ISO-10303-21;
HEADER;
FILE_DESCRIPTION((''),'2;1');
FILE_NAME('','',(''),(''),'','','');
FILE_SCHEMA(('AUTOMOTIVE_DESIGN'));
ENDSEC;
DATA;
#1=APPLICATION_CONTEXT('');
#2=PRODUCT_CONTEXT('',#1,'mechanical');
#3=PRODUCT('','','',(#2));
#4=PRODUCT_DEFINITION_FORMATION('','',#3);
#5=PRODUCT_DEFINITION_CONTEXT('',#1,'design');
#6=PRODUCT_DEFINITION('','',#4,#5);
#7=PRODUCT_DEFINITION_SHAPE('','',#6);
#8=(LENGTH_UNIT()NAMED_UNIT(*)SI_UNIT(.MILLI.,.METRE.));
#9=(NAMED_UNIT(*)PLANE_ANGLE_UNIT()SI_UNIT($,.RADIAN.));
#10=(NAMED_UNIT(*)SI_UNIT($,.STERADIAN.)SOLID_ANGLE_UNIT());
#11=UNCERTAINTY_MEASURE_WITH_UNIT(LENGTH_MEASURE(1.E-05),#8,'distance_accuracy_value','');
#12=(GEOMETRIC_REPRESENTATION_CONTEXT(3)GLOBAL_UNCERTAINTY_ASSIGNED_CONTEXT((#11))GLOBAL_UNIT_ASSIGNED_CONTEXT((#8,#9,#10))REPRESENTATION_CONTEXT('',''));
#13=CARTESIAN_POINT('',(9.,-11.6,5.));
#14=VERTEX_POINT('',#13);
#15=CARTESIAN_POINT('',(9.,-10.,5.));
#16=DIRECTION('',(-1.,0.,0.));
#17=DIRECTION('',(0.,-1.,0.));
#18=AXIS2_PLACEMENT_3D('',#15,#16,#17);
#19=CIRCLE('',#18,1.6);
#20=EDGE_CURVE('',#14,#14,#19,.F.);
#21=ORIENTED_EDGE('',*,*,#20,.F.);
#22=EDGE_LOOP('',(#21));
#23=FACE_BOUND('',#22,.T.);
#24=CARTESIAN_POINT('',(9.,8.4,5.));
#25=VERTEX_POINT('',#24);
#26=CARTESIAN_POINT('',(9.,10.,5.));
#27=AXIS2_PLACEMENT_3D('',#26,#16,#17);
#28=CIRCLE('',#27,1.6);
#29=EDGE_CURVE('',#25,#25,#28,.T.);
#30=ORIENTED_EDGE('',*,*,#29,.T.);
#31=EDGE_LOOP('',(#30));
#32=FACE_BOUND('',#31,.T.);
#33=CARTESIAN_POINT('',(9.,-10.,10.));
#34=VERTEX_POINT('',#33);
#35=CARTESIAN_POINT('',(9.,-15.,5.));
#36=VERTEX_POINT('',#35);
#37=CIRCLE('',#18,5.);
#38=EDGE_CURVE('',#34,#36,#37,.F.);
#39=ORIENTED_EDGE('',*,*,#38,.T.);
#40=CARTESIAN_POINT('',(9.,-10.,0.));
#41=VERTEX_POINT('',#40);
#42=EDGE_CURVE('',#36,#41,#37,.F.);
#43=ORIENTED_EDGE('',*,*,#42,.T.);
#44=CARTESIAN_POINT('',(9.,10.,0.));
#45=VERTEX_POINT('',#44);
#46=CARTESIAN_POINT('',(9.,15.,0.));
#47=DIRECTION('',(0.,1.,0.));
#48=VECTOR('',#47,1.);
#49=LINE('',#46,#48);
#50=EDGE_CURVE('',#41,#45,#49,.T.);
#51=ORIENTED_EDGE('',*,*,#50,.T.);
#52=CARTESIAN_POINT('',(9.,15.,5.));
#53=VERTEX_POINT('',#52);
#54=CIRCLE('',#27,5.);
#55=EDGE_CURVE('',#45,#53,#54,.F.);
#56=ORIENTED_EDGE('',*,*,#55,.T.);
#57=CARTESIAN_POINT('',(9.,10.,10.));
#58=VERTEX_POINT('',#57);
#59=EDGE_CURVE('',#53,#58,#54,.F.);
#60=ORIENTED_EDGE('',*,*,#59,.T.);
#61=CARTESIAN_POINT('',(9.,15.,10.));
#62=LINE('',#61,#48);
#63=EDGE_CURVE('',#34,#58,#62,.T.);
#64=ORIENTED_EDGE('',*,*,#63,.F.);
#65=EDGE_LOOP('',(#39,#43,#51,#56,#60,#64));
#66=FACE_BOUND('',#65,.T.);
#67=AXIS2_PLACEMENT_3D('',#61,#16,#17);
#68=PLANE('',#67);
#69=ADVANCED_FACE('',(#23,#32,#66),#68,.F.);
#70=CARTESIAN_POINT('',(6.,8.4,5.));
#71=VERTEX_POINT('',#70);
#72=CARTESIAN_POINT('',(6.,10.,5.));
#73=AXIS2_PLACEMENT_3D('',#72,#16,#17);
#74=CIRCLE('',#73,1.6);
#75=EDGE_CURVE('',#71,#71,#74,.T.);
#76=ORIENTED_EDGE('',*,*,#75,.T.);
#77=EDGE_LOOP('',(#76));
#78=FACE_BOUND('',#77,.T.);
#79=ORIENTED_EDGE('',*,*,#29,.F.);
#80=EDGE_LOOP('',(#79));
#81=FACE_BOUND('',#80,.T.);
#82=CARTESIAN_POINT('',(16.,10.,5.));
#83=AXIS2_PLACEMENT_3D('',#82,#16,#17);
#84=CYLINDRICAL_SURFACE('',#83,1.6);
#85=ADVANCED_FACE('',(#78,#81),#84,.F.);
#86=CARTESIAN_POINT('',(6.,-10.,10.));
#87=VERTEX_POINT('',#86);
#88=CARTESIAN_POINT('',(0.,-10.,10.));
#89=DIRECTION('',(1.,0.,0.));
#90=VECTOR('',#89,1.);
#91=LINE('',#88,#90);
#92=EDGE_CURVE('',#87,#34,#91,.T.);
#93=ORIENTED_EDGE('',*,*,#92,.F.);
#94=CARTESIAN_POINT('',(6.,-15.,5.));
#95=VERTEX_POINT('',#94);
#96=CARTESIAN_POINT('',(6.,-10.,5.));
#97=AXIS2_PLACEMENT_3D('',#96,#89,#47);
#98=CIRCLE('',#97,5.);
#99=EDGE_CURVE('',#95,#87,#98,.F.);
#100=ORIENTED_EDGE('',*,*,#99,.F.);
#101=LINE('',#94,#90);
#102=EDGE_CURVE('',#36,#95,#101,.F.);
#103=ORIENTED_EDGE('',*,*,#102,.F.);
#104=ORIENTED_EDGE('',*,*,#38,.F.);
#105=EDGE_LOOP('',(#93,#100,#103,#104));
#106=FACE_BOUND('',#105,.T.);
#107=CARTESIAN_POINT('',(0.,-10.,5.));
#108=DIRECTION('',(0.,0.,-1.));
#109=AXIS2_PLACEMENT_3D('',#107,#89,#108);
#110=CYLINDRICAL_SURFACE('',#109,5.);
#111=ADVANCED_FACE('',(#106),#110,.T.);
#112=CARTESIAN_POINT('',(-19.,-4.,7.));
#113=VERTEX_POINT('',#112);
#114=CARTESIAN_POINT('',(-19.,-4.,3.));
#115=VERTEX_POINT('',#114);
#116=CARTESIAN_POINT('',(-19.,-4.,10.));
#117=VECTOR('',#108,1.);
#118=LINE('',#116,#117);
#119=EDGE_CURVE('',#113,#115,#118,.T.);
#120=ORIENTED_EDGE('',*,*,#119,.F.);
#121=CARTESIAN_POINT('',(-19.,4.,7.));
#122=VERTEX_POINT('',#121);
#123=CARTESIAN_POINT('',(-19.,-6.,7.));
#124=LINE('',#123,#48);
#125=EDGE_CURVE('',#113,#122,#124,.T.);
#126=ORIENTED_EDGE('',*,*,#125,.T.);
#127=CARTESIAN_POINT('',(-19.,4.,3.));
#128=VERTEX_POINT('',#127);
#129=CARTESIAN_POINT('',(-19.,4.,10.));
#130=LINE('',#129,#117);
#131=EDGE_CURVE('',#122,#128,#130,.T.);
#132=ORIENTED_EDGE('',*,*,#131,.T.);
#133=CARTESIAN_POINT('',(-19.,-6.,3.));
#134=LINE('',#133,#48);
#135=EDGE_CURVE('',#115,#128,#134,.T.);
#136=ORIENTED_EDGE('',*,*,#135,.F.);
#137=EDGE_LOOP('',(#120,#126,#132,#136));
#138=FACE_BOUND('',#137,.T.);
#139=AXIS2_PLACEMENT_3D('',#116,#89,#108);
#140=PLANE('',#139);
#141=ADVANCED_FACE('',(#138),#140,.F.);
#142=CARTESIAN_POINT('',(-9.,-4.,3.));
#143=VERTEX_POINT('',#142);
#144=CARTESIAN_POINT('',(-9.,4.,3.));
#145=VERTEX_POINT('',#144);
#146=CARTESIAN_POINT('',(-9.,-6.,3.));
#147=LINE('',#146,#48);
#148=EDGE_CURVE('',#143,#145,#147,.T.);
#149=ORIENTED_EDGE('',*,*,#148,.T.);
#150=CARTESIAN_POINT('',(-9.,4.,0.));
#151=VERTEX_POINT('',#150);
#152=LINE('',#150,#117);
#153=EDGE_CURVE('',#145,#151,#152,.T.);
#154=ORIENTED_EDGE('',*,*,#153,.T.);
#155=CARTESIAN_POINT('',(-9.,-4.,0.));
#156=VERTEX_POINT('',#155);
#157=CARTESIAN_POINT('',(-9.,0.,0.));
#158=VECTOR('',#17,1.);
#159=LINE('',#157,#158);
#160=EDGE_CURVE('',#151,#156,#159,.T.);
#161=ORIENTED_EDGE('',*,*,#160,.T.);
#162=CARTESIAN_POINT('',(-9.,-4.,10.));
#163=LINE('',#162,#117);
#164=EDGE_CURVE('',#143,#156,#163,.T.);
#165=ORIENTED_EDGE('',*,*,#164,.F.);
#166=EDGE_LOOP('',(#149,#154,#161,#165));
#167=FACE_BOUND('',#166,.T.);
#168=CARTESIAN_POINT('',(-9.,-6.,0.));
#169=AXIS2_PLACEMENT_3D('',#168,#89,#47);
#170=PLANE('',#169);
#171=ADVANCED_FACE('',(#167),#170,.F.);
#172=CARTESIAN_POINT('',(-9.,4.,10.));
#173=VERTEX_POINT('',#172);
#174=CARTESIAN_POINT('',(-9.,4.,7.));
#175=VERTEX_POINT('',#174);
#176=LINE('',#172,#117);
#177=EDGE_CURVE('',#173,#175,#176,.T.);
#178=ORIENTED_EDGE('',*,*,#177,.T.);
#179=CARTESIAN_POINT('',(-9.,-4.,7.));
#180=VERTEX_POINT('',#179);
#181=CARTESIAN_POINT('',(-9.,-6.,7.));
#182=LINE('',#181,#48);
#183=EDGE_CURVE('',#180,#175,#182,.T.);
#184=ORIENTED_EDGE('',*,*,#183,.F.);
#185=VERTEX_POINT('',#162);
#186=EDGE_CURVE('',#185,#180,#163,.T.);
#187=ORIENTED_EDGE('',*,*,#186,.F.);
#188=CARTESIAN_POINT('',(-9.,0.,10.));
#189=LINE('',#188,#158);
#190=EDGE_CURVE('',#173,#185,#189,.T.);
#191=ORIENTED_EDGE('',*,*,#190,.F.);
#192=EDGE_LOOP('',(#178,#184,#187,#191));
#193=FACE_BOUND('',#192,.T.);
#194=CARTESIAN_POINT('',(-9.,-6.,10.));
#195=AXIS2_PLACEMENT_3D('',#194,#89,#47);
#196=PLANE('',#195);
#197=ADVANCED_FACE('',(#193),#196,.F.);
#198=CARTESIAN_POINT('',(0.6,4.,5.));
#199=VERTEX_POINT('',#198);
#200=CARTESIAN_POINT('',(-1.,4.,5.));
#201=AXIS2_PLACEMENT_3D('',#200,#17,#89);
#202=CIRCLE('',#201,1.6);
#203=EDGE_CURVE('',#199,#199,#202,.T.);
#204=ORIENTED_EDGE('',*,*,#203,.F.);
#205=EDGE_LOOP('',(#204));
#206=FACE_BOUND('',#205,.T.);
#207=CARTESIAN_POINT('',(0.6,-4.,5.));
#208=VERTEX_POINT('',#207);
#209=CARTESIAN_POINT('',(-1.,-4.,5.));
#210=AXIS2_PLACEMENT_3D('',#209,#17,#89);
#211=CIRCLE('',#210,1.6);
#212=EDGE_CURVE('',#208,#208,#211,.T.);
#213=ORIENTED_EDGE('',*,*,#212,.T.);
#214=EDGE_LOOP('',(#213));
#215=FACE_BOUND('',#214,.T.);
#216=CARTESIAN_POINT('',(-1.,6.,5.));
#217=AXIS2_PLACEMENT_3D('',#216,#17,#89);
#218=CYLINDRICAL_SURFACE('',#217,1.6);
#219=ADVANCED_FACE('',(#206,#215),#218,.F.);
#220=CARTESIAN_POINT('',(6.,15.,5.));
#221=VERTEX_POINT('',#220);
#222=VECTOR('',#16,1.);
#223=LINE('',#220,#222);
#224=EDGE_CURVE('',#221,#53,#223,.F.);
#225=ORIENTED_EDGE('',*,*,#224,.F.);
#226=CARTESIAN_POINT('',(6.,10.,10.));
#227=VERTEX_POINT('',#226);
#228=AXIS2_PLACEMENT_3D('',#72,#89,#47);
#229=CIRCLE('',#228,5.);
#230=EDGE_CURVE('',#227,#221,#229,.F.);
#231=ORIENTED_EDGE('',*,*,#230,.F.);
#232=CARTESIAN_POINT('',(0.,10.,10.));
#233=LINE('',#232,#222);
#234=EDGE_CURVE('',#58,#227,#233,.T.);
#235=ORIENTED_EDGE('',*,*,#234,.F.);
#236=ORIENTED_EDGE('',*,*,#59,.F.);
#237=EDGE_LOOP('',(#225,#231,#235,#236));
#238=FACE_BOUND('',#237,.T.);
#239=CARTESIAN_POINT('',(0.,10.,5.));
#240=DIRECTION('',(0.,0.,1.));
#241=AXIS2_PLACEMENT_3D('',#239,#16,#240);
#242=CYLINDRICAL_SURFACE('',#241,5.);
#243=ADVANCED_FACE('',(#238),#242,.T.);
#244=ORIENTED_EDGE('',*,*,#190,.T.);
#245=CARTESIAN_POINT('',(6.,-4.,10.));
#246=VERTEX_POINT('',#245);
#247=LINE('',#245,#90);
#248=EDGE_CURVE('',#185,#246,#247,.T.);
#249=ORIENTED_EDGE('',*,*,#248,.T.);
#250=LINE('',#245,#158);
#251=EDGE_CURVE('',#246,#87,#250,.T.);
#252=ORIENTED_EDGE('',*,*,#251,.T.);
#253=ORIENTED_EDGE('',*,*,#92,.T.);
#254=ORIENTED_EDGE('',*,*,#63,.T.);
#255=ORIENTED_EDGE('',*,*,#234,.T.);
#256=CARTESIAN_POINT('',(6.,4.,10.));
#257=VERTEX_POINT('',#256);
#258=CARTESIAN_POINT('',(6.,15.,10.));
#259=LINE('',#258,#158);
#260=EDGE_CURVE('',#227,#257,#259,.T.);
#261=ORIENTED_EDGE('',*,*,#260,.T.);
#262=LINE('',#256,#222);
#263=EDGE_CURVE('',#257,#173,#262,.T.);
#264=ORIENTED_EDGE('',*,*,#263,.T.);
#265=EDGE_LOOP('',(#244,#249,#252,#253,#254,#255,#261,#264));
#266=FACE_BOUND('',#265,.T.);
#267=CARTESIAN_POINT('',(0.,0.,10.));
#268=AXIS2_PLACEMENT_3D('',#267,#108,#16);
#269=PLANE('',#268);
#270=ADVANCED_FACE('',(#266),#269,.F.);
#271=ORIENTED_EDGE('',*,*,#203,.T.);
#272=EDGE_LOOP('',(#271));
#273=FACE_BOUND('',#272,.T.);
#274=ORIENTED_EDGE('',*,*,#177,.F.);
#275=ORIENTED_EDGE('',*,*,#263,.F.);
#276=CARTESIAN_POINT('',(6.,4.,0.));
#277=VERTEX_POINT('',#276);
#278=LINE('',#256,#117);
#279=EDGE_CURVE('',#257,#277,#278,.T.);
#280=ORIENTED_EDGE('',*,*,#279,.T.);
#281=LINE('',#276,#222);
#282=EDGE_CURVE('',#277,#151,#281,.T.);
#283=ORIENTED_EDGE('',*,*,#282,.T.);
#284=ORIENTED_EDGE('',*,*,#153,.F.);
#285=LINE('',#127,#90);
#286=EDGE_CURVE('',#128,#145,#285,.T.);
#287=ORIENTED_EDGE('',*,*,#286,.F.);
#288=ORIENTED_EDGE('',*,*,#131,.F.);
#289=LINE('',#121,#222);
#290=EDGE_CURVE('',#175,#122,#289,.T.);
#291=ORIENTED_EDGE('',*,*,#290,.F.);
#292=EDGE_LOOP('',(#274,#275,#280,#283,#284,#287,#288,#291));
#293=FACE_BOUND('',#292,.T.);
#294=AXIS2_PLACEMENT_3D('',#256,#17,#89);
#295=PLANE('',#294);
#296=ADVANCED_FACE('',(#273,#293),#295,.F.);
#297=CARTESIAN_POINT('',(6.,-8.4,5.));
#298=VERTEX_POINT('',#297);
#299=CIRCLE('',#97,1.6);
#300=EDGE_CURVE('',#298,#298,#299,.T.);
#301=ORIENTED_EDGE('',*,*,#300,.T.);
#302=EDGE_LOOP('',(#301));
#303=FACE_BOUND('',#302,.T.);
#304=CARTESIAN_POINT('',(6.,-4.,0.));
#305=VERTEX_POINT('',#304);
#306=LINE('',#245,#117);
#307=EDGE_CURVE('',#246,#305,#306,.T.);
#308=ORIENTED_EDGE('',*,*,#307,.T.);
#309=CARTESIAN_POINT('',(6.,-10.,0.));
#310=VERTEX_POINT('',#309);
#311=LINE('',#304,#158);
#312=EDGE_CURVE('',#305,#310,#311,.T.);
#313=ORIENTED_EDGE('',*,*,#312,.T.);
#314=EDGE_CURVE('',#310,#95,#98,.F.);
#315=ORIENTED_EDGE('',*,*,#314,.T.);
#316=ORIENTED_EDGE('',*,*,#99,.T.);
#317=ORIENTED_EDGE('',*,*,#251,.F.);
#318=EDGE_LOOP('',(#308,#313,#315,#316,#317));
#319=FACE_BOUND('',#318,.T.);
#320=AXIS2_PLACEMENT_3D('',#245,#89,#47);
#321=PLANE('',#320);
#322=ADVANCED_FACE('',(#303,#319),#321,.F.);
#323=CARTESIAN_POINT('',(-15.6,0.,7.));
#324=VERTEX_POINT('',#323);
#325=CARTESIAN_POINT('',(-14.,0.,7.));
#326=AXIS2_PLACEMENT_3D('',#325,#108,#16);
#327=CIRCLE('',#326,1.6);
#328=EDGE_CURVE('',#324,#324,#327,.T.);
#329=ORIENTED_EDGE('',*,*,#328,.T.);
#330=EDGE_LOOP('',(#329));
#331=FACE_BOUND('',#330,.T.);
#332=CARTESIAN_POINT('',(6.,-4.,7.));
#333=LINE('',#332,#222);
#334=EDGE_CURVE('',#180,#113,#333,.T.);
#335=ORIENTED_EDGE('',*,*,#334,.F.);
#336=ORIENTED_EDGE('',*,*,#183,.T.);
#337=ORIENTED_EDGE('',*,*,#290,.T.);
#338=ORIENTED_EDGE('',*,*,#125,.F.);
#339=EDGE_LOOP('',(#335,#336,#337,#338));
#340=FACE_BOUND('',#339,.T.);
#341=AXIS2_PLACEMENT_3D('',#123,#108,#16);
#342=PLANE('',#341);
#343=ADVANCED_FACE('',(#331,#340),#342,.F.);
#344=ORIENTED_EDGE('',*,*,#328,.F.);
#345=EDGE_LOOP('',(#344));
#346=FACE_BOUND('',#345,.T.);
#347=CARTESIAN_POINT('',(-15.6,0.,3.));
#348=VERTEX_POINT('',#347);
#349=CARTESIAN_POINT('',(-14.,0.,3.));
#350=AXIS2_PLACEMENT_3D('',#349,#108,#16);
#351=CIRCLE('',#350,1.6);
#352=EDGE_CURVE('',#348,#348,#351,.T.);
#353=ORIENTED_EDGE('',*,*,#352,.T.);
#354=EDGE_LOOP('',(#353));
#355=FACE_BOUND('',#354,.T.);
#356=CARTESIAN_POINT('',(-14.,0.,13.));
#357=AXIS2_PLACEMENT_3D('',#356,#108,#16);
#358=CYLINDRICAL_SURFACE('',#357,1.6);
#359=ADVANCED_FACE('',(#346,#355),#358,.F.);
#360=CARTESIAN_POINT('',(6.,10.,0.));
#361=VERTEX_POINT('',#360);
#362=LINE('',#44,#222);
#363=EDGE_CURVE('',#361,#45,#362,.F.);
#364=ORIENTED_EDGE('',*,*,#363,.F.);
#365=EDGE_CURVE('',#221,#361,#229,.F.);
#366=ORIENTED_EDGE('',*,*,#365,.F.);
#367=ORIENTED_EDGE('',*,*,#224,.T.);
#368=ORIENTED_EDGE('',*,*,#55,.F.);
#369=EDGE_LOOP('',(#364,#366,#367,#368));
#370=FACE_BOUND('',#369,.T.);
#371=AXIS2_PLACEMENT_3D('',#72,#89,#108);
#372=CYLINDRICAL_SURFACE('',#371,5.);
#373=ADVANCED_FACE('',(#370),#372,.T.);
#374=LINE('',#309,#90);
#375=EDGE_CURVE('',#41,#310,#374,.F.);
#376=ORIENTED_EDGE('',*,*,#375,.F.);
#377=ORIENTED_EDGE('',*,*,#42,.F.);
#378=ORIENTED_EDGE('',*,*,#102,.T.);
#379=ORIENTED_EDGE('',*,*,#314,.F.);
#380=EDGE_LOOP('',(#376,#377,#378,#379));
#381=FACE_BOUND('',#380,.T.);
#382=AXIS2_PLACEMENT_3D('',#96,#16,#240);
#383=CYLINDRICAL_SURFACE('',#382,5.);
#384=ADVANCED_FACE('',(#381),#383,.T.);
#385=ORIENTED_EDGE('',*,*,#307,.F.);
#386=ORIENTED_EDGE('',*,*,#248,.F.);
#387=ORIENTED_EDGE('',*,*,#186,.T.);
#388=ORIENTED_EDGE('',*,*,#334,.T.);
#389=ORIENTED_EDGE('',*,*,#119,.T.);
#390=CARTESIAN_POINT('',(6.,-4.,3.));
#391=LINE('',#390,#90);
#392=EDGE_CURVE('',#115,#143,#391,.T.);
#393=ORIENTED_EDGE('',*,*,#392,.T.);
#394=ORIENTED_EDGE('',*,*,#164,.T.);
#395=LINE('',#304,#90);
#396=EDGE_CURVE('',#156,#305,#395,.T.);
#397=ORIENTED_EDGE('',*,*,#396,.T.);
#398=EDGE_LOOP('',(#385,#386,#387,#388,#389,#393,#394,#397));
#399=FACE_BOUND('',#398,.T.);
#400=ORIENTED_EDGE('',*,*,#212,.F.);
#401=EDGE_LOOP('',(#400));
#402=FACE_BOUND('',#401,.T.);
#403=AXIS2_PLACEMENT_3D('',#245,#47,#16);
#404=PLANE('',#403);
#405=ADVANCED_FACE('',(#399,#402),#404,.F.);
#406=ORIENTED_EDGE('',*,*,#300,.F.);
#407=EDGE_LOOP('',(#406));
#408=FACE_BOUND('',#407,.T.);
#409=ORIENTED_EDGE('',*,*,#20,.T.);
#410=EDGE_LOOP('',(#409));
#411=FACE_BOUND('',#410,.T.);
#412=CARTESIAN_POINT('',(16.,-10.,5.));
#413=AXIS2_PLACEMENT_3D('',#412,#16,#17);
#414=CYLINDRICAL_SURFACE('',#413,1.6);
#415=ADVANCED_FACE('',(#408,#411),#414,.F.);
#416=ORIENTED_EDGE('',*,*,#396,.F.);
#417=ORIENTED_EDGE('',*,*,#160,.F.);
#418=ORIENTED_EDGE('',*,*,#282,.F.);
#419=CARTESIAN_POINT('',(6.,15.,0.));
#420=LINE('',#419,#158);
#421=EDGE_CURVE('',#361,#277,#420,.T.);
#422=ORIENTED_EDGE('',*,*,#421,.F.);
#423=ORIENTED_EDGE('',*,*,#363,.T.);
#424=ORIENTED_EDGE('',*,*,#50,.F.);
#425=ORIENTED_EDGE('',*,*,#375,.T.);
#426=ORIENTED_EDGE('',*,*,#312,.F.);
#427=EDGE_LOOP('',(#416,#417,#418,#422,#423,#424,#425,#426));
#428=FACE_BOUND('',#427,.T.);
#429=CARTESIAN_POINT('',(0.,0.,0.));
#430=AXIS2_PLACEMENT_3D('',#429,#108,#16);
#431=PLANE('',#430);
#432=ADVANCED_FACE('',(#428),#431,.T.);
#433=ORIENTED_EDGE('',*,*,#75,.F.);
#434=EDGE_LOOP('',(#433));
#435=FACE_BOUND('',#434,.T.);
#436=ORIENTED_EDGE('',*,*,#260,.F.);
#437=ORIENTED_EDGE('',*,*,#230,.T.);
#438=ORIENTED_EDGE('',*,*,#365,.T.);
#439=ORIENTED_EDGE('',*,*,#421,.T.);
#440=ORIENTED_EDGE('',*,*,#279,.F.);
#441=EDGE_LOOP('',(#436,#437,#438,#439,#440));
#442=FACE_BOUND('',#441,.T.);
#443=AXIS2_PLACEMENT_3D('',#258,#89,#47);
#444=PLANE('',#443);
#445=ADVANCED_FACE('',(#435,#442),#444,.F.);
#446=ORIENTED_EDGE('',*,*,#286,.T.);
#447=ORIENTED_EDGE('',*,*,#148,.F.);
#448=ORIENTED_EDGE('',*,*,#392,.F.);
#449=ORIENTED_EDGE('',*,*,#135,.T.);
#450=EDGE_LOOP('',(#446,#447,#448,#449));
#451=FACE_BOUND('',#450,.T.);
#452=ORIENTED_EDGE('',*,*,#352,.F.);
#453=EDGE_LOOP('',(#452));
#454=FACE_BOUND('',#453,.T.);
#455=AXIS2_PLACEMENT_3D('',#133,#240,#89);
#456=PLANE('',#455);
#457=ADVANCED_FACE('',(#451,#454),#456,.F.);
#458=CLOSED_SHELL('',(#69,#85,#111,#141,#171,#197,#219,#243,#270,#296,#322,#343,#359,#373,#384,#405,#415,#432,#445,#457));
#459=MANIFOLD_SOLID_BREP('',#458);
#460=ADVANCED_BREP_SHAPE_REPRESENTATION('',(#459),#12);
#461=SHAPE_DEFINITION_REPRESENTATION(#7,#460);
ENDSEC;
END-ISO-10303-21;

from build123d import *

# Parameters (mm, degrees)
BOSS_EXTRU_1_DEPTH      = 10
ESQUISSE2_R             = 1.6
ENL_V_MAT_EXTRU_1_DEPTH = 10
CONG_1_R                = 5
ESQUISSE3_W             = 10
ESQUISSE3_H             = 3
ENL_V_MAT_EXTRU_2_DEPTH = 10
ESQUISSE4_R             = 1.6
ENL_V_MAT_EXTRU_3_DEPTH = 10
ESQUISSE5_R             = 1.6
ENL_V_MAT_EXTRU_4_DEPTH = 10


with BuildPart() as part:
    # Esquisse1 → Boss.-Extru.1 (new body)
    with BuildSketch(Plane.XY):
        Polygon((6, -4), (6, -15), (9, -15), (9, 15), (6, 15), (6, 4), (-19, 4), (-19, -4), align=None)
    extrude(amount=BOSS_EXTRU_1_DEPTH)

    # Esquisse2 → Enlèv. mat.-Extru.1 (cut)
    with BuildSketch(Plane.ZY.offset(-6)):
        with Locations(Location((5, 10, 0), (0, 0, 270))):
            Circle(ESQUISSE2_R)
    enl_v_mat_extru_1 = extrude(amount=-ENL_V_MAT_EXTRU_1_DEPTH, mode=Mode.SUBTRACT)

    # Symétrie3: Enlèv. mat.-Extru.1 across plane
    add(enl_v_mat_extru_1.mirror(Plane.ZX), mode=Mode.SUBTRACT)

    # Congé1
    cong_1_edges = [part.edges().sort_by_distance(p)[0] for p in [
        (7.5, 15, 0),
        (7.5, 15, 10),
        (7.5, -15, 0),
        (7.5, -15, 10),
    ]]
    fillet(cong_1_edges, radius=CONG_1_R - 0.0001)  # a hair under: the kernel refuses the full size

    # Esquisse3 → Enlèv. mat.-Extru.2 (cut)
    with BuildSketch(Plane(origin=(0, 4, 0), x_dir=(1, 0, 0), z_dir=(0, 1, 0))):
        with Locations((-14, -1.5)):
            Rectangle(ESQUISSE3_W, ESQUISSE3_H)
        with Locations((-14, -8.5)):
            Rectangle(ESQUISSE3_W, ESQUISSE3_H)
    extrude(amount=-ENL_V_MAT_EXTRU_2_DEPTH, mode=Mode.SUBTRACT)

    # Esquisse4 → Enlèv. mat.-Extru.3 (cut)
    with BuildSketch(Plane(origin=(0, 0, 3), x_dir=(-1, 0, 0), z_dir=(0, 0, -1))):
        with Locations((14, 0)):
            Circle(ESQUISSE4_R)
    extrude(amount=-ENL_V_MAT_EXTRU_3_DEPTH, mode=Mode.SUBTRACT)

    # Esquisse5 → Enlèv. mat.-Extru.4 (cut)
    with BuildSketch(Plane.XZ.offset(4)):
        with Locations((-1, 5)):
            Circle(ESQUISSE5_R)
    extrude(amount=-ENL_V_MAT_EXTRU_4_DEPTH, mode=Mode.SUBTRACT)


solid = part.part
